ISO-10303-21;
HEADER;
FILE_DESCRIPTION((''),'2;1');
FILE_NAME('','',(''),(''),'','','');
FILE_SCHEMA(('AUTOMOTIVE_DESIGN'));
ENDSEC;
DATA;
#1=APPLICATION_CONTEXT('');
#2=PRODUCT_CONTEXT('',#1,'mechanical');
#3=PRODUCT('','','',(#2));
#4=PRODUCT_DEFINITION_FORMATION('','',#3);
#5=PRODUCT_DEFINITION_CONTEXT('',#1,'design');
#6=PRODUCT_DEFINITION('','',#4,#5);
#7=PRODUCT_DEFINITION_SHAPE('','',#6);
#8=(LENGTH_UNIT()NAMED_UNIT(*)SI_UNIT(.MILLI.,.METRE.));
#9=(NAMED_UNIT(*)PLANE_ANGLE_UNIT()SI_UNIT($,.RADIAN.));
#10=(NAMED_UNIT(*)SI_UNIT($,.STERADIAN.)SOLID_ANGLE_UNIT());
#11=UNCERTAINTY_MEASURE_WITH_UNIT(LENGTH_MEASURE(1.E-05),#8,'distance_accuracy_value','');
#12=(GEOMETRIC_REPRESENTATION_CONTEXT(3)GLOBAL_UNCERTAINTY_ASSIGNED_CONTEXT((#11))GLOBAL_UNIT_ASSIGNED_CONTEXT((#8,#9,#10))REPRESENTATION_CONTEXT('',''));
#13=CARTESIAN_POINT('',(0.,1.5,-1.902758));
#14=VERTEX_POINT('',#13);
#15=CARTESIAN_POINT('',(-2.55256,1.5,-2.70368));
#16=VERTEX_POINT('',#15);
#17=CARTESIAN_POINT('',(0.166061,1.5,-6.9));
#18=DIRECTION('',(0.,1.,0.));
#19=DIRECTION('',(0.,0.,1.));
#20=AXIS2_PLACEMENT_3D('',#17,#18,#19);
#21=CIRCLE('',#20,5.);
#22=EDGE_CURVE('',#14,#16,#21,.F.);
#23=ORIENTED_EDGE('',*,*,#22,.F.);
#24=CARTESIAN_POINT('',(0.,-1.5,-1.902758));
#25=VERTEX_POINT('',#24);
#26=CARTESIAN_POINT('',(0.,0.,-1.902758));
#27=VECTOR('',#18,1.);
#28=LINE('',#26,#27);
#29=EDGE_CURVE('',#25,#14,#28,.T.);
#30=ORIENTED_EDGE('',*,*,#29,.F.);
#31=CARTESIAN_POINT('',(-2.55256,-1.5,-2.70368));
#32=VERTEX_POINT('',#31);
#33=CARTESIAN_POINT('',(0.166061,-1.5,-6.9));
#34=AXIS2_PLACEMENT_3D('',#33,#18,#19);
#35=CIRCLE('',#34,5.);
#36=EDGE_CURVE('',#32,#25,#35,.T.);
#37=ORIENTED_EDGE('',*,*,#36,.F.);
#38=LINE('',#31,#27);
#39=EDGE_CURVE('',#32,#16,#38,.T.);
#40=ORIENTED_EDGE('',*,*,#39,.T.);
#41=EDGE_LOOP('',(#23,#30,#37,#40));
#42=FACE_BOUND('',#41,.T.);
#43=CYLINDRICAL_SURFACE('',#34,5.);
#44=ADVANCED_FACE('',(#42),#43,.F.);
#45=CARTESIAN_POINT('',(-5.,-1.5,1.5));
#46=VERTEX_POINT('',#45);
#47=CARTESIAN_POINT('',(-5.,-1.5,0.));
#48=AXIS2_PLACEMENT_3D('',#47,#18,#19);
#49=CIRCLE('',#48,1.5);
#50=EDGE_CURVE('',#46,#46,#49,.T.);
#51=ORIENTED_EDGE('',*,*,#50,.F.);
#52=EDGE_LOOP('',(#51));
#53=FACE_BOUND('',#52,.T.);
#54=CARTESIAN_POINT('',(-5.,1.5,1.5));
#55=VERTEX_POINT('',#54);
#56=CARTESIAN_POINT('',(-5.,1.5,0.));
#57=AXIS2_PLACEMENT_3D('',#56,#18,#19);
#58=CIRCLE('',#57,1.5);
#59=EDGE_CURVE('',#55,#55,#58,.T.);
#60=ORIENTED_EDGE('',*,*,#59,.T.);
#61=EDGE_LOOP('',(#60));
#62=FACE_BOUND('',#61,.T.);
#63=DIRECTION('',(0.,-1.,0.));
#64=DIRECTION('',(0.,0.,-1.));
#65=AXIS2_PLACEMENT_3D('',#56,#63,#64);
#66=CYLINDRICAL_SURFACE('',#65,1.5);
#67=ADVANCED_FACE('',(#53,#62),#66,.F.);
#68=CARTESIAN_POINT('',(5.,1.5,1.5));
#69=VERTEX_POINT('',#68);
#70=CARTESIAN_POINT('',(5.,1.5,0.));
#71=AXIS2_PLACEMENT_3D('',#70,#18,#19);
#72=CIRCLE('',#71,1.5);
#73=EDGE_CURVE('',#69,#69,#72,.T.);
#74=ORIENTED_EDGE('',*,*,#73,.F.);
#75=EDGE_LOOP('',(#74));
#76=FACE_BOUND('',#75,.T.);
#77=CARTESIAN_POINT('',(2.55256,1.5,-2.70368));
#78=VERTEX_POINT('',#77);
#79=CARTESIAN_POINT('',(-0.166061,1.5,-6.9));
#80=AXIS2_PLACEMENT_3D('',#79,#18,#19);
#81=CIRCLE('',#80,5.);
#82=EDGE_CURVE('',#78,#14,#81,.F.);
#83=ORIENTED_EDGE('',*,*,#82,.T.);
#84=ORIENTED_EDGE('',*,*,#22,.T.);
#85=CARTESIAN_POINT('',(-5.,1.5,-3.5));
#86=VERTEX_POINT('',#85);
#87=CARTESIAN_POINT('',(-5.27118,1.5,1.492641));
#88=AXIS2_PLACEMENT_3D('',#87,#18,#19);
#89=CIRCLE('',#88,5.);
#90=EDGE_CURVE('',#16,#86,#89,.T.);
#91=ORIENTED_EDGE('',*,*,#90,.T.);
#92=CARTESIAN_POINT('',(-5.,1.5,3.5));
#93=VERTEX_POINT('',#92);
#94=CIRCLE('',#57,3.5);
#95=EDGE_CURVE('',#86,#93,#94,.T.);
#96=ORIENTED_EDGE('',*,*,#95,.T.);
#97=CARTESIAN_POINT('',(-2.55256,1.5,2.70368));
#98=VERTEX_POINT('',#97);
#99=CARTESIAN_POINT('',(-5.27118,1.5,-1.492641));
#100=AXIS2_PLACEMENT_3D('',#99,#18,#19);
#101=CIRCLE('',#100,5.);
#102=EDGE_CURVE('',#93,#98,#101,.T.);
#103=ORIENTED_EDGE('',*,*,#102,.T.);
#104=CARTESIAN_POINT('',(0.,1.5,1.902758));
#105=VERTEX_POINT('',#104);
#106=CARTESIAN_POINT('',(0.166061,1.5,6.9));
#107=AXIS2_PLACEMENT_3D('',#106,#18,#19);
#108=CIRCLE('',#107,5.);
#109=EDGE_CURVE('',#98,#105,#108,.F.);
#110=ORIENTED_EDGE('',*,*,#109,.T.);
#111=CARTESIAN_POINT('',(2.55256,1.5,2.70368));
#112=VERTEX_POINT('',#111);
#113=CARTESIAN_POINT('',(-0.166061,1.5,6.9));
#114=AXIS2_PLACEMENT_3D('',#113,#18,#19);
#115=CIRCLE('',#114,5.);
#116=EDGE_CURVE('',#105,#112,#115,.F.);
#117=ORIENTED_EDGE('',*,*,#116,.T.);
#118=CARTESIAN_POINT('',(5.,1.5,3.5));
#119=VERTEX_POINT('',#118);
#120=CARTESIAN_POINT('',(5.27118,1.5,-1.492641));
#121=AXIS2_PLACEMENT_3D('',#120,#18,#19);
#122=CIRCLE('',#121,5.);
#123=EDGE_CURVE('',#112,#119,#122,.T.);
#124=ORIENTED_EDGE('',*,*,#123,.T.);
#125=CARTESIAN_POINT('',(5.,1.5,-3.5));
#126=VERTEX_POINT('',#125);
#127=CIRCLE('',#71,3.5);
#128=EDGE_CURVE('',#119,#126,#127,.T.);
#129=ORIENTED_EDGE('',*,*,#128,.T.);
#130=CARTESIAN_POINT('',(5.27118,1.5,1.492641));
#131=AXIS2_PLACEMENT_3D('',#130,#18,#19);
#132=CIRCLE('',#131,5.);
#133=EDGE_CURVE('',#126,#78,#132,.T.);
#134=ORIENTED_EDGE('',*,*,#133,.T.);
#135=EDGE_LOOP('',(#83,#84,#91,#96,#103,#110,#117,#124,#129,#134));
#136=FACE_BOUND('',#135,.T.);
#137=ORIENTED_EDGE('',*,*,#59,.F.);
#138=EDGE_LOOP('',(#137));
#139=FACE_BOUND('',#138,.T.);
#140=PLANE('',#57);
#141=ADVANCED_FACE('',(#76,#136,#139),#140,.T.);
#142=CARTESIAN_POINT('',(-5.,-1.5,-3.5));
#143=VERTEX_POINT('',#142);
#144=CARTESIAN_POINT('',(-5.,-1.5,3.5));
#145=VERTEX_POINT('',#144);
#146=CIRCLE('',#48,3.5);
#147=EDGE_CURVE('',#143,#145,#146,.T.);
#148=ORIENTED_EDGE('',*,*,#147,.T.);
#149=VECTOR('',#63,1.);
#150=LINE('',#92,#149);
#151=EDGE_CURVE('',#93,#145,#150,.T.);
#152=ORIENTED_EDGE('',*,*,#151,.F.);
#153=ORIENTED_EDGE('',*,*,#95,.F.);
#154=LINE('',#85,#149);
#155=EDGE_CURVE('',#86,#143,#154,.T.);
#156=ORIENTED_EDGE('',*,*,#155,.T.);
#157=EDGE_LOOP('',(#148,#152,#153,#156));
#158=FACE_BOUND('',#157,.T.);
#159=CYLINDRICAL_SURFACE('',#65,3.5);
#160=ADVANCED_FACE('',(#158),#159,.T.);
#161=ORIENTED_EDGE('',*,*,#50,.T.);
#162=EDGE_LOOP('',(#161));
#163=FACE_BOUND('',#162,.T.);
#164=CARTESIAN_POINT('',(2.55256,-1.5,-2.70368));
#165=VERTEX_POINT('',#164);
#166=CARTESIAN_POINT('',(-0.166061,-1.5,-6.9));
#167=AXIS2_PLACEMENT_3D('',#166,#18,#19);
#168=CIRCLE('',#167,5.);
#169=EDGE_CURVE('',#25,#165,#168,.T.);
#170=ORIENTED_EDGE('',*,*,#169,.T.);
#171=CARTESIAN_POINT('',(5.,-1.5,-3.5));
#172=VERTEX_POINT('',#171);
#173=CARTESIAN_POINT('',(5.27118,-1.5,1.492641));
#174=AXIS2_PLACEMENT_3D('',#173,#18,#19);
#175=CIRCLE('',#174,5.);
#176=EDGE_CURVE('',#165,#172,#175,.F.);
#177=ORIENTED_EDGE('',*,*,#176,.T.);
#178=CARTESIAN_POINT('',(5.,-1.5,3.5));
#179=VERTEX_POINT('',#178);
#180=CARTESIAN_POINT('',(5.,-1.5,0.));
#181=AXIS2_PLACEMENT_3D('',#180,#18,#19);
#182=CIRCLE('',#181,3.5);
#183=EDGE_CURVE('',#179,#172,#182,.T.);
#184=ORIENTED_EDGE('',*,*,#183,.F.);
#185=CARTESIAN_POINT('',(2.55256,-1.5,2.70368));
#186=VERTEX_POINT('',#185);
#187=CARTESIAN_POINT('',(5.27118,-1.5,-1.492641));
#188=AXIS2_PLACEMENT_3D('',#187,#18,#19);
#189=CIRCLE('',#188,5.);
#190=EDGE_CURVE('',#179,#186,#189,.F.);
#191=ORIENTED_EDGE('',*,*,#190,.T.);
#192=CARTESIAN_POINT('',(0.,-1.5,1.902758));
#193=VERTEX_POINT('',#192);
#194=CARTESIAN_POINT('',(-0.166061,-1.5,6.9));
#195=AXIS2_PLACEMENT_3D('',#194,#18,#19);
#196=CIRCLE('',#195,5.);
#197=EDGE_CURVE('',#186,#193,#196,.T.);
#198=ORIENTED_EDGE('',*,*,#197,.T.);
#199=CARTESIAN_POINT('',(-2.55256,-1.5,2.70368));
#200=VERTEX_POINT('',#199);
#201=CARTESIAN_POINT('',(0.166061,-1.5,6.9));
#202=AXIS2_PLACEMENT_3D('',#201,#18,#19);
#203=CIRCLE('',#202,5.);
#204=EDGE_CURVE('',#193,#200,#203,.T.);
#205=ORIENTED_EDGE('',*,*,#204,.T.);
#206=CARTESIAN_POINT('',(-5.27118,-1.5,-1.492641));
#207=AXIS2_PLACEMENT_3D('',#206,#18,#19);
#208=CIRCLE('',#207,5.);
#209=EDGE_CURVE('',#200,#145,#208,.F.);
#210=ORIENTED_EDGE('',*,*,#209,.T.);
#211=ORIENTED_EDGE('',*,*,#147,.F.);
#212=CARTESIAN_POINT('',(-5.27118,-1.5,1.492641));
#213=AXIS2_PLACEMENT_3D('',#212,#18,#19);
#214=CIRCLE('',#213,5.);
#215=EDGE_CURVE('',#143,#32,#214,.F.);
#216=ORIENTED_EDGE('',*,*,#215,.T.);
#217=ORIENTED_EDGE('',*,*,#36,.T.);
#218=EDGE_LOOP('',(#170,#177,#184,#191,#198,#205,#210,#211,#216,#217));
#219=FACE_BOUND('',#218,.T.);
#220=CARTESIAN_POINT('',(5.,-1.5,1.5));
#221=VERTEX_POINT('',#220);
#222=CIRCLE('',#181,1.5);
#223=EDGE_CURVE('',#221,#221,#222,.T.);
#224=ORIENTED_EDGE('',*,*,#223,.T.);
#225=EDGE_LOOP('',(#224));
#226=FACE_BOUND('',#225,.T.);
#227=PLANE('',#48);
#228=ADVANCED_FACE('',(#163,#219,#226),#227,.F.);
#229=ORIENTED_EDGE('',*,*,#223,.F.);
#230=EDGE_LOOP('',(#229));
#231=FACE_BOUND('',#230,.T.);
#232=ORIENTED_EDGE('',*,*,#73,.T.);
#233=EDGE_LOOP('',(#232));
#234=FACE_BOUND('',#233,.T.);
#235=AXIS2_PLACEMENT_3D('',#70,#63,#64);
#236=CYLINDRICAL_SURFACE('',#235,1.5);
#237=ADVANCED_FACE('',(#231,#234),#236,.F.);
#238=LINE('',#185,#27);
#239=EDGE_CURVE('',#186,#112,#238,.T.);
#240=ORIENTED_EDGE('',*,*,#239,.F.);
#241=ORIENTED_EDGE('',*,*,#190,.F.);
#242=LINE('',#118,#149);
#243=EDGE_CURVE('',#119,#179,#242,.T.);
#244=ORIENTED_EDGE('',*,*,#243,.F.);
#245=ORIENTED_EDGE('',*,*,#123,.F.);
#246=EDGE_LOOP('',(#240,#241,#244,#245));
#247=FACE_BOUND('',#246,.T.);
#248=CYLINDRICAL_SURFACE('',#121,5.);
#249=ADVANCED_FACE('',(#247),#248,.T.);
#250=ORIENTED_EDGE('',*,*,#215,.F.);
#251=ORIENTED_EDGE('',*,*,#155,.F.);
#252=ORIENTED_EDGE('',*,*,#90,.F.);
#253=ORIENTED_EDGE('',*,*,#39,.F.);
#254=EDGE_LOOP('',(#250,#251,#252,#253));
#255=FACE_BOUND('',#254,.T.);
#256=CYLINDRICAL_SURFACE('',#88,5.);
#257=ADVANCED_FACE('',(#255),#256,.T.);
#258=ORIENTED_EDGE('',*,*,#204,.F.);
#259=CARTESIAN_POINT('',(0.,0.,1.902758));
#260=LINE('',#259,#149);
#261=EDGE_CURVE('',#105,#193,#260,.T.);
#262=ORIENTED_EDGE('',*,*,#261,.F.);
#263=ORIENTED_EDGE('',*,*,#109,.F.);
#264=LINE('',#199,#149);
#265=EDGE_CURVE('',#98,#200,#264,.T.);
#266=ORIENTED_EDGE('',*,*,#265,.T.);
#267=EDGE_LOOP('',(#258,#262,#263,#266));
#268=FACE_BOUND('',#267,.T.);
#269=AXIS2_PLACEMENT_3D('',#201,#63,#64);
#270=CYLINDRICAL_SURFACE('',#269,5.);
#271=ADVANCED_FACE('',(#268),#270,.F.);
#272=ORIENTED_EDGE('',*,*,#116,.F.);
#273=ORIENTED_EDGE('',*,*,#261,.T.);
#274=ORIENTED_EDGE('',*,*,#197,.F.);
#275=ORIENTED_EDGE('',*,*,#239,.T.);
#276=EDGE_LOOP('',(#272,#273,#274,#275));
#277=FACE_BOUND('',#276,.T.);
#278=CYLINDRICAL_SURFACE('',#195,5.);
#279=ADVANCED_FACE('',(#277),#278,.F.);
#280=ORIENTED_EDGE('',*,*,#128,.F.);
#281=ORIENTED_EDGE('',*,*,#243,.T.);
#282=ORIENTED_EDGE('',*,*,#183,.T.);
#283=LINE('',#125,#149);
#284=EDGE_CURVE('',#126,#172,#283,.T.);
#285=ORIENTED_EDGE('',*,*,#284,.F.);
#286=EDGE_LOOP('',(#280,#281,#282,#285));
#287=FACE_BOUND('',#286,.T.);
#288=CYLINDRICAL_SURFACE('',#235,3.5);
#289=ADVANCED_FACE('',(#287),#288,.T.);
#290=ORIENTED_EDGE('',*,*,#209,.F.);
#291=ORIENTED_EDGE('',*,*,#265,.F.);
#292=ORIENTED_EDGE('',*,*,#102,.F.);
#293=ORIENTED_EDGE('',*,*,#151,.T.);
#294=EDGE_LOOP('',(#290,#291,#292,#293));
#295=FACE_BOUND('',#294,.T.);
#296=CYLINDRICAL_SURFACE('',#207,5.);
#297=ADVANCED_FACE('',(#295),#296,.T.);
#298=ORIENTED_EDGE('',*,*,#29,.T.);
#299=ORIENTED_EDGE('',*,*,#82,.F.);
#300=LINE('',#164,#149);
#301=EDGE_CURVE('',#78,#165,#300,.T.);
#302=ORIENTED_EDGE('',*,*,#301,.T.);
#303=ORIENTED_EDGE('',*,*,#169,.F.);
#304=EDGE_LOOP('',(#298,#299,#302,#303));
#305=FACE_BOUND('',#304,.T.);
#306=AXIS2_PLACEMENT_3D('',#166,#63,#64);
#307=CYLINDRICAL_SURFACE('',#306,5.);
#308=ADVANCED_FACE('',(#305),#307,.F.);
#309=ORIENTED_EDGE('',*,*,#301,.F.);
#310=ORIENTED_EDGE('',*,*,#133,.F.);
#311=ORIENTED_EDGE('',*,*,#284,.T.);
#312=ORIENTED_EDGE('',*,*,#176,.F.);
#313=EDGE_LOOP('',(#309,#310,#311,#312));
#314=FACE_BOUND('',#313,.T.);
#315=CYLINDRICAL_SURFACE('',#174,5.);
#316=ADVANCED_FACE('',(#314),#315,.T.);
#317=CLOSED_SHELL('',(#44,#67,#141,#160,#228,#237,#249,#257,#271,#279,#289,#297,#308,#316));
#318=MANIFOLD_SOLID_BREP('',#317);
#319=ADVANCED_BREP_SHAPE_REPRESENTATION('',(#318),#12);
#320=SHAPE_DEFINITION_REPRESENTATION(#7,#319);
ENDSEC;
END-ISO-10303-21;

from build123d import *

# Parameters (mm, degrees)
SKETCH1_R               = 1.5
BOSS_EXTRUDE1_DEPTH     = 1.5
CUT_EXTRUDE1_DEPTH      = 10.313968005
CUT_EXTRUDE1_DEPTH_BACK = 10.313968005
SKETCH2_W               = 7
SKETCH2_H               = 1.6
FILLET1_R               = 5
FILLET2_R               = 5


with BuildPart() as part:
    # Sketch1 → Boss-Extrude1 (new, symmetric)
    with BuildSketch(Plane(origin=(0, 0, 0), x_dir=(1, 0, 0), z_dir=(0, 1, 0))):
        with BuildLine():
            Line((-5, 3.5), (5, 3.5))
            ThreePointArc((5, 3.5), (8.5, 0), (5, -3.5))
            Line((5, -3.5), (-5, -3.5))
            ThreePointArc((-5, -3.5), (-8.5, 0), (-5, 3.5))
        make_face()
        with Locations(Location((-5, 0, 0), (0, 0, 270))):
            Circle(SKETCH1_R, mode=Mode.SUBTRACT)
        with Locations(Location((5, 0, 0), (0, 0, 270))):
            Circle(SKETCH1_R, mode=Mode.SUBTRACT)
    extrude(amount=BOSS_EXTRUDE1_DEPTH, both=True)

    # Sketch2 → Cut-Extrude1 (cut, two sides: drawn at the far end of the back side and taken through both)
    with BuildSketch(Plane(origin=(0, 0, 0), x_dir=(1, 0, 0), z_dir=(0, 1, 0)).offset(-CUT_EXTRUDE1_DEPTH_BACK)):
        with Locations((0, -2.7)):
            Rectangle(SKETCH2_W, SKETCH2_H)
        with Locations((0, 2.7)):
            Rectangle(SKETCH2_W, SKETCH2_H)
    extrude(amount=CUT_EXTRUDE1_DEPTH + CUT_EXTRUDE1_DEPTH_BACK, mode=Mode.SUBTRACT)

    # Fillet1
    # the kernel refuses this fillet: 5 mm, written as the material it adds along each edge
    with BuildSketch(Plane(origin=(-3.5, 1.5, 1.9), x_dir=(0, 0, 1), z_dir=(0, -1, 0)), Plane(origin=(3.5, 1.5, -1.9), x_dir=(0, 0, -1), z_dir=(0, -1, 0))) as fillet1_piece_1:
        with BuildLine():
            CenterArc((5, -3.666060556), FILLET1_R, 132.843643044, 47.156356956)
            Line((0, -3.666060556), (-0.1, -3.666060556))
            Line((-0.1, -3.666060556), (-0.1, 0))
            Line((-0.1, 0), (0, 0.1))
            ThreePointArc((0, 0.1), (0.8, 0.1), (1.532, 0.073321211))
            Line((1.532, 0.073321211), (1.6, 0))
        make_face()
    extrude(amount=3)
    with BuildSketch(Plane(origin=(-3.5, 1.5, -1.9), x_dir=(1, 0, 0), z_dir=(0, -1, 0))) as fillet1_piece_2:
        with BuildLine():
            CenterArc((3.666060556, -5), FILLET1_R, 90, 47.156356956)
            Line((0, -1.6), (-0.073321211, -1.532))
            ThreePointArc((-0.073321211, -1.532), (-0.1, -0.8), (-0.1, 0))
            Line((-0.1, 0), (0, 0.1))
            Line((0, 0.1), (3.666060556, 0.1))
            Line((3.666060556, 0.1), (3.666060556, 0))
        make_face()
    extrude(amount=3)
    with BuildSketch(Plane(origin=(3.5, -1.5, 1.9), x_dir=(-1, 0, 0), z_dir=(0, 1, 0))) as fillet1_piece_3:
        with BuildLine():
            CenterArc((3.666060556, 5), FILLET1_R, 222.843643044, 47.156356956)
            Line((0, 1.6), (-0.073321211, 1.532))
            ThreePointArc((-0.073321211, 1.532), (-0.1, 0.8), (-0.1, 0))
            Line((-0.1, 0), (0, -0.1))
            Line((0, -0.1), (3.666060556, -0.1))
            Line((3.666060556, -0.1), (3.666060556, 0))
        make_face()
    extrude(amount=3)

    # Fillet2
    # the kernel refuses this fillet: 5 mm, written as the material it takes off along each edge
    with BuildSketch(Plane(origin=(-3.5, 5.25, 3.5), x_dir=(0.7655176455574427, 0, -0.6434149006202682), z_dir=(0, -1, 0)), Plane(origin=(3.5, -5.25, 3.5), x_dir=(-0.7655176455574455, 0, -0.6434149006202647), z_dir=(0, 1, 0))) as fillet2_piece_1:
        with BuildLine():
            CenterArc((1.856470149, -4.961557983), FILLET2_R, 97.109423017, 29.828495219)
            Line((-1.148276468, -0.965122351), (0, 0))
            ThreePointArc((0, 0), (0.618823383, -0.038442017), (1.237646766, 0))
        make_face()
    extrude(amount=10.5, mode=Mode.SUBTRACT)
    with BuildSketch(Plane(origin=(-3.5, -5.25, -3.5), x_dir=(-1.0, 0, 2.909376443463916e-12), z_dir=(0, 1, 0))) as fillet2_piece_2:
        with BuildLine():
            CenterArc((1.771179679, 4.992640742), FILLET2_R, 237.062489078, 29.828495219)
            ThreePointArc((-0.947440439, 0.796320371), (-0.448986053, 0.427588228), (0, 0))
            Line((0, 0), (1.5, 0))
        make_face()
    extrude(amount=10.5, mode=Mode.SUBTRACT)
    with BuildSketch(Plane(origin=(3.5, -5.25, -3.5), x_dir=(-0.7655176455574453, 0, 0.6434149006202652), z_dir=(0, 1, 0))) as fillet2_piece_3:
        with BuildLine():
            CenterArc((1.856470149, 4.961557983), FILLET2_R, 233.062081764, 29.828495219)
            Line((-1.148276468, 0.965122351), (0, 0))
            ThreePointArc((0, 0), (0.618823383, 0.038442017), (1.237646766, 0))
        make_face()
    extrude(amount=10.5, mode=Mode.SUBTRACT)


solid = part.part
